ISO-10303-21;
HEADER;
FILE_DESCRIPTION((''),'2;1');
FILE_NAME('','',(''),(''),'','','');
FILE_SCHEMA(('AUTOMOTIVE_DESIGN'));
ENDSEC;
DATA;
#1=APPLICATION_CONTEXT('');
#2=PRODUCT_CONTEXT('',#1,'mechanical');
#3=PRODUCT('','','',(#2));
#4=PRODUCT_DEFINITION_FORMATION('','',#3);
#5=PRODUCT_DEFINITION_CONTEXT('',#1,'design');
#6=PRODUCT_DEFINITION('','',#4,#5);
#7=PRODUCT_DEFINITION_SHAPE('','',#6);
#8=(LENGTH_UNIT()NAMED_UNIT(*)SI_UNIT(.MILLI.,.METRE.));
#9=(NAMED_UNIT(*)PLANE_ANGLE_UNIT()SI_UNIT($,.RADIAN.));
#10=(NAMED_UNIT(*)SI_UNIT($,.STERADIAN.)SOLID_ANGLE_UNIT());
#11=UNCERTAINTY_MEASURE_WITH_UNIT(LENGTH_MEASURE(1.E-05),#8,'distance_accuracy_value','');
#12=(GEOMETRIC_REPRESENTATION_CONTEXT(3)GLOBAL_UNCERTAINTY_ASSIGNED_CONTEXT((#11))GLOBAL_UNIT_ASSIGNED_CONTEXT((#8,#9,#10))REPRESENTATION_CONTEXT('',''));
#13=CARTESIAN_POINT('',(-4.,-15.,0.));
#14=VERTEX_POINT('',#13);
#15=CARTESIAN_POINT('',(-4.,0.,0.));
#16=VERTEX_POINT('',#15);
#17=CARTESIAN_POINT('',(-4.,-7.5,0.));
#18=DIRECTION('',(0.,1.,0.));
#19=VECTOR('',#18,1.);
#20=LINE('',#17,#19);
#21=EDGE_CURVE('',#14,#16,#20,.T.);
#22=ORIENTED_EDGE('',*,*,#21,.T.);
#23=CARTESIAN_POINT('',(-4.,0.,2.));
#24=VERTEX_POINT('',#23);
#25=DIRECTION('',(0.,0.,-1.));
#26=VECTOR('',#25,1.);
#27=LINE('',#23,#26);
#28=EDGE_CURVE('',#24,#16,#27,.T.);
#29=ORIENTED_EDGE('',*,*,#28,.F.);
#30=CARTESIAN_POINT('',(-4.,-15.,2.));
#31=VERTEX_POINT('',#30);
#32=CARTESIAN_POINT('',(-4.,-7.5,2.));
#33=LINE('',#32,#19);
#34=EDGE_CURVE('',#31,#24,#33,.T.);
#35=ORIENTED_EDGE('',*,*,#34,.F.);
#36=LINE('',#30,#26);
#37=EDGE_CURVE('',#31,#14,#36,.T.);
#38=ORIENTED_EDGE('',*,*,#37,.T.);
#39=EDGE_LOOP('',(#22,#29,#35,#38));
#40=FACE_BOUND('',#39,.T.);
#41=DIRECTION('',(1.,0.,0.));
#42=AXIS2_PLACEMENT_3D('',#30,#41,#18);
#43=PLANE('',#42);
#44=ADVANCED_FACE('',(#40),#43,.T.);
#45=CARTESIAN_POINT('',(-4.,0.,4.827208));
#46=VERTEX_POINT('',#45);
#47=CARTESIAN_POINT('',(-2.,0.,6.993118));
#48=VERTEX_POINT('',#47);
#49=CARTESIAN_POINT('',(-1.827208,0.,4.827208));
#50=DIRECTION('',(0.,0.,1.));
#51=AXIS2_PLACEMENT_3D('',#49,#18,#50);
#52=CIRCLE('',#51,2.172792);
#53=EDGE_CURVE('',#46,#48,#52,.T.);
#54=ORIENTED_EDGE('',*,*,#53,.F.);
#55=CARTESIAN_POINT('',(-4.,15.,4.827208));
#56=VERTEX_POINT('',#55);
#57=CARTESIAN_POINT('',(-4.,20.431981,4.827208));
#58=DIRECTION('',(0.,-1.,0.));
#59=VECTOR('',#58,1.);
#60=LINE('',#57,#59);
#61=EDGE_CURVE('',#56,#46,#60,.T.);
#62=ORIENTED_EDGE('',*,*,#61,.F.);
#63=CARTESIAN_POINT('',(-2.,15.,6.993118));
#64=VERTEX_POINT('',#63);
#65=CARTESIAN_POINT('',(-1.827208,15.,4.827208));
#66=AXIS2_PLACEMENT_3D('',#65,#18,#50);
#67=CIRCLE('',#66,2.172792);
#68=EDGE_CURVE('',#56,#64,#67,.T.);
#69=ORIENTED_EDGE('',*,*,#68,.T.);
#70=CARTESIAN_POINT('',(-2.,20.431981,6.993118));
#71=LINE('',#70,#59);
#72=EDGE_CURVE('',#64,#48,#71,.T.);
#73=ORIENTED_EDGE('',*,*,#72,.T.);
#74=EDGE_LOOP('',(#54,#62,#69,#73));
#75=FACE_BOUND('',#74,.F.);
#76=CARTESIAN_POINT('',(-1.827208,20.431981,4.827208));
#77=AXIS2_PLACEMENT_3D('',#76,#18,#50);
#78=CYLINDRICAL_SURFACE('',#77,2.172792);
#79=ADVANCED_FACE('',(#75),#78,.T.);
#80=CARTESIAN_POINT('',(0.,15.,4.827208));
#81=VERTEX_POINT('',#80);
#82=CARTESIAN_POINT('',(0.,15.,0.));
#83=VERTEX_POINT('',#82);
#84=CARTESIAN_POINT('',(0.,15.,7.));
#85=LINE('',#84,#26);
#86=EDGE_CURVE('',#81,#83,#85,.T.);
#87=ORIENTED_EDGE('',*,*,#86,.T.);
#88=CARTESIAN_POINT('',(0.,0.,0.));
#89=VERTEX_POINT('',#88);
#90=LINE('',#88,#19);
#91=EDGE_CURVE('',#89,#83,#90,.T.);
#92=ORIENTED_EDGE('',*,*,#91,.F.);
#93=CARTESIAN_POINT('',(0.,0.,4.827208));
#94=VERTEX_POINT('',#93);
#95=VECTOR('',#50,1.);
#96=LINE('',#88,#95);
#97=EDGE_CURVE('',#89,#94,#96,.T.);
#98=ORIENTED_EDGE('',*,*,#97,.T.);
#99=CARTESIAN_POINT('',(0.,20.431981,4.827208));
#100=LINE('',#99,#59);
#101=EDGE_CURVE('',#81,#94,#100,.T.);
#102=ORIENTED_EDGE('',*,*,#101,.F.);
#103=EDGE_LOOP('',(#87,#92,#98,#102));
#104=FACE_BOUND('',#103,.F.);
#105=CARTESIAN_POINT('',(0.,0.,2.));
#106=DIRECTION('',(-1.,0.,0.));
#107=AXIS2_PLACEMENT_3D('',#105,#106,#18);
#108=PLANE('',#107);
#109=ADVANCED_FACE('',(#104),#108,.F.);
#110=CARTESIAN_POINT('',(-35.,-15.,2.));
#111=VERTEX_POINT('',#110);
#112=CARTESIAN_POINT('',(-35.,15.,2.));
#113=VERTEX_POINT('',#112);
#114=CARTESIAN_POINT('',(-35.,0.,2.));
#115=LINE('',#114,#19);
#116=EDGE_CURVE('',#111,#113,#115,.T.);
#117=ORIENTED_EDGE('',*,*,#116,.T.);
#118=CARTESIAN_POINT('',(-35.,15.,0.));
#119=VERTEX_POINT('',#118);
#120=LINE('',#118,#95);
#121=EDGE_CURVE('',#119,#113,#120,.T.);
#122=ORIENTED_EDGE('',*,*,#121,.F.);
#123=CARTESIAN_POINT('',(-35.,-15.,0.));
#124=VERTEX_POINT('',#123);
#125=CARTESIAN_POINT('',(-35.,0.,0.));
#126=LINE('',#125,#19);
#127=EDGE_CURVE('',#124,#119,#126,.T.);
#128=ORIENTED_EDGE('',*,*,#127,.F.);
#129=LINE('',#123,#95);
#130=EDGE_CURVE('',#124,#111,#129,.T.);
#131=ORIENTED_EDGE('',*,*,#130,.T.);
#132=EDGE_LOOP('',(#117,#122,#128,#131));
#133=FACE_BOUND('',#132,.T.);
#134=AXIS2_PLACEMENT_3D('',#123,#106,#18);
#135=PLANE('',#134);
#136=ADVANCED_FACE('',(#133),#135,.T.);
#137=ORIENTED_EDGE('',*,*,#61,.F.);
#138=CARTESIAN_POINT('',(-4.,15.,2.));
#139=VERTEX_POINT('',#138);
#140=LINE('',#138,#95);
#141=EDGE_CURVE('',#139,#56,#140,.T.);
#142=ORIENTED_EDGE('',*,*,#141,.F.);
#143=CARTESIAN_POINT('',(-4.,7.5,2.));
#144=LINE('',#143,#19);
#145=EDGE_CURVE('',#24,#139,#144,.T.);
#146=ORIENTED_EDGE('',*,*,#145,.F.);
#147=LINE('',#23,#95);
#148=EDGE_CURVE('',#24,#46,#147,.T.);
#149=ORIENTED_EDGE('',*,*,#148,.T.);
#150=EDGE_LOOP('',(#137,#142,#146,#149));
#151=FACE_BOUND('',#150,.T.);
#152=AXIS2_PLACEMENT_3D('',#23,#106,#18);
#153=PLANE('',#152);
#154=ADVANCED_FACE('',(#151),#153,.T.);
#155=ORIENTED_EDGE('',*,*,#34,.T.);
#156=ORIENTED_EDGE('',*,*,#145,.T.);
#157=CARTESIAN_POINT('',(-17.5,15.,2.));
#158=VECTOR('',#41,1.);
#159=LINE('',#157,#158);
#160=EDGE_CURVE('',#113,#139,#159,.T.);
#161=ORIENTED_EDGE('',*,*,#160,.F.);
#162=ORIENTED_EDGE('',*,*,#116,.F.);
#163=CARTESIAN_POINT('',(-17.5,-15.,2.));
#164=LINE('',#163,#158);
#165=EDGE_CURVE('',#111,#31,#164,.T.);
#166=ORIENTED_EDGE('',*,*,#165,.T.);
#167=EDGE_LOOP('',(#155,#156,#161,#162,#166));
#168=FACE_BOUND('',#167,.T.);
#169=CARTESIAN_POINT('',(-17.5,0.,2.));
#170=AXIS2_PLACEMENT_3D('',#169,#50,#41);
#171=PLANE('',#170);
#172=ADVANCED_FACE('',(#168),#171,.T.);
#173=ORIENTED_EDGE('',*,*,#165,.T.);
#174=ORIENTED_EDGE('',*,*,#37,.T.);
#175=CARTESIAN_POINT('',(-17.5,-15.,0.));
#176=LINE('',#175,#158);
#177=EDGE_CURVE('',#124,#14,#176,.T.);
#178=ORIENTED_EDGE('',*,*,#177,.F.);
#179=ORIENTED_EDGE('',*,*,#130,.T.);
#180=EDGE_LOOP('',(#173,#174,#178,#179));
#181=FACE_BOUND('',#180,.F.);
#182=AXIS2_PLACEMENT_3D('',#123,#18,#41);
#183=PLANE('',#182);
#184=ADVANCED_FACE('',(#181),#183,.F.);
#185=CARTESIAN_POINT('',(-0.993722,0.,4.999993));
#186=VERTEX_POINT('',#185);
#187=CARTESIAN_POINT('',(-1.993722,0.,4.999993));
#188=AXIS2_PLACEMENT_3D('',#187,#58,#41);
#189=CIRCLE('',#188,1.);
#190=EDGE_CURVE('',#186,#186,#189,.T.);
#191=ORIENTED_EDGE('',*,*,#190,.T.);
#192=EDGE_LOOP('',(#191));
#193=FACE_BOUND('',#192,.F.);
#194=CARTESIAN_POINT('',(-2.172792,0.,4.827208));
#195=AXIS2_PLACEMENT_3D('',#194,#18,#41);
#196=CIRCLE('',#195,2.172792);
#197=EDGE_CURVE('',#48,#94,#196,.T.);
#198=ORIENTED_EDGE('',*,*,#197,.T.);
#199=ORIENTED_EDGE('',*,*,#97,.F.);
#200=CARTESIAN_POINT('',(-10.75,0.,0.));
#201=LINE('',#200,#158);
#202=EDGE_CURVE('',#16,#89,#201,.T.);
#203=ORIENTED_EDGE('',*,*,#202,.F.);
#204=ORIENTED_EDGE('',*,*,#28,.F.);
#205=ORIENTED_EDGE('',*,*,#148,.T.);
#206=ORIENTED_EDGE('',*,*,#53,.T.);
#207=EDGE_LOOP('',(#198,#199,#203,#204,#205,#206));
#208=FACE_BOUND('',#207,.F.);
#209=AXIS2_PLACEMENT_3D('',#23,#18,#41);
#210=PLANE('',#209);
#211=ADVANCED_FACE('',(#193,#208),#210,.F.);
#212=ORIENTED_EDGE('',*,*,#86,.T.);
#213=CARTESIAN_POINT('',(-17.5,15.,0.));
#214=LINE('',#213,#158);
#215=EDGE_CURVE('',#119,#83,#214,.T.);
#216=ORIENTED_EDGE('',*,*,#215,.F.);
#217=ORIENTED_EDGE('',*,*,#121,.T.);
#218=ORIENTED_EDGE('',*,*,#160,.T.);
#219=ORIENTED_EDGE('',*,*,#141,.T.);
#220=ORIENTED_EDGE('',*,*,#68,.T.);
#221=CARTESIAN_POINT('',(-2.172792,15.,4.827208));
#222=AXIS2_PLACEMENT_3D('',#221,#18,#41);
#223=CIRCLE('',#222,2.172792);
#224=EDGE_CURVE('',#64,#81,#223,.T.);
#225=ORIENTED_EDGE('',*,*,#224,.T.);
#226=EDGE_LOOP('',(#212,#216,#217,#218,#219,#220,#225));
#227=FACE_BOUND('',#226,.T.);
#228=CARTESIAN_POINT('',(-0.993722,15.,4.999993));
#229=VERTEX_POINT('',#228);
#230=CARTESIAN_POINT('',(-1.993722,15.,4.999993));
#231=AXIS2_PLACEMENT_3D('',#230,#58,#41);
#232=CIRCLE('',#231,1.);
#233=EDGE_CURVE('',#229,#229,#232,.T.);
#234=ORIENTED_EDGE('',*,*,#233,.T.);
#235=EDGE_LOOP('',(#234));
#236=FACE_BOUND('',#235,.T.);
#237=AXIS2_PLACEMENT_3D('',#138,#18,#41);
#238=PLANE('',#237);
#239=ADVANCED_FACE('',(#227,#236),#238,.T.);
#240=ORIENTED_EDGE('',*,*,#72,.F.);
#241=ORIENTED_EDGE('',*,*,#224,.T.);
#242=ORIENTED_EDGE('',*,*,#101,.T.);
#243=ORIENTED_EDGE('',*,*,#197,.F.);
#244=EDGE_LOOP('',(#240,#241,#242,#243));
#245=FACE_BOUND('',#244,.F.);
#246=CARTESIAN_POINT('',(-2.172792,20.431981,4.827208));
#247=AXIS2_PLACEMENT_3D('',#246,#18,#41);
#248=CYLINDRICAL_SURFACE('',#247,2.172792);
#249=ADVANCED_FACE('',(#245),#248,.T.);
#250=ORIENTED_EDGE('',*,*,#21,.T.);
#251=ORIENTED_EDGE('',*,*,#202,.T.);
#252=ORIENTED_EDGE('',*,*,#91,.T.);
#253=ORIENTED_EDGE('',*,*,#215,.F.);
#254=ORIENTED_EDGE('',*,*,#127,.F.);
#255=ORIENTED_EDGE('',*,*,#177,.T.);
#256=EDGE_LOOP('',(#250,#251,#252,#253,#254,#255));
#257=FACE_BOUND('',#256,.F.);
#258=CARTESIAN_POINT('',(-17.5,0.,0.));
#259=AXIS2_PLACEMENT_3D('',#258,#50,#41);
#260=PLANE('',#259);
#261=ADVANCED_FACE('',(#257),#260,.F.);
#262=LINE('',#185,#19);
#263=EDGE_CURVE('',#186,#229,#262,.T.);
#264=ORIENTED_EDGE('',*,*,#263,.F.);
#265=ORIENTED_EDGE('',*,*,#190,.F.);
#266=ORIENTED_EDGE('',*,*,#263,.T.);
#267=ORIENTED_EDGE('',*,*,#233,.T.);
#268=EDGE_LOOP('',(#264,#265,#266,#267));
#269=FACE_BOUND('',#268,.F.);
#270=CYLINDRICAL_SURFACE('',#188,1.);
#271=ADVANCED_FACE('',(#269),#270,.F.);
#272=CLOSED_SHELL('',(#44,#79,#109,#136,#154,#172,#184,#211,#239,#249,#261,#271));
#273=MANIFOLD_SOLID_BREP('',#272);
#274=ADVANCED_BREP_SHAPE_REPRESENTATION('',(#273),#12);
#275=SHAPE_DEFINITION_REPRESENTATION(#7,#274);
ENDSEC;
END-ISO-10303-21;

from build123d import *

# Parameters (mm, degrees)
F0_W        = 35
F0_H        = 30
F1_DEPTH    = 2
F2_W        = 4
F2_H        = 15
F3_DEPTH    = 5
F4_R        = 1
F5_DEPTH    = 25
F6_T1_DEPTH = 25.8639610307
F7_W        = 4
F7_H        = 15
F8_DEPTH    = 25


# Not quite as in the source:
# - a fillet or chamfer that OpenCascade refuses, or shapes differently, is made with other operations: its cross-section is extruded or revolved along the edge and cut away or added


with BuildPart() as f1:
    # F0 (on Top) → F1 (new body)
    with BuildSketch(Plane.XY):
        with Locations((-17.5, 0)):
            Rectangle(F0_W, F0_H)
    extrude(amount=F1_DEPTH)

    # F2 (on face) → F3 (join)
    with BuildSketch(Plane.XY.offset(2)):
        with Locations((-2, 7.5)):
            Rectangle(F2_W, F2_H)
    extrude(amount=F3_DEPTH)

    # F4 (on face) → F5 (cut)
    with BuildSketch(Plane.XZ):
        with Locations((-1.9937221408, 4.9999934314)):
            Circle(F4_R)
    extrude(amount=-F5_DEPTH, mode=Mode.SUBTRACT)

    # F6: fillet of radius 2.1727922061 on 2 edges, made by hand

    # F6_s2 → F6_t1 (cut)
    with BuildSketch(Plane.XZ.offset(-20.4319805153)):
        with BuildLine():
            ThreePointArc((-1.8272077939, 7), (-3.3636038969, 6.3636038969), (-4, 4.8272077939))
            Line((-4, 4.8272077939), (-4, 7))
            Line((-4, 7), (-1.8272077939, 7))
        make_face()
        with BuildLine():
            ThreePointArc((0, 4.8272077939), (-0.6363961031, 6.3636038969), (-2.1727922061, 7))
            Line((-2.1727922061, 7), (0, 7))
            Line((0, 7), (0, 4.8272077939))
        make_face()
    extrude(amount=F6_T1_DEPTH, mode=Mode.SUBTRACT)

    # F7 (on face) → F8 (cut)
    with BuildSketch(Plane.XY.offset(2)):
        with Locations((-2, -7.5)):
            Rectangle(F7_W, F7_H)
    extrude(amount=-F8_DEPTH, mode=Mode.SUBTRACT)


solid = f1.part
